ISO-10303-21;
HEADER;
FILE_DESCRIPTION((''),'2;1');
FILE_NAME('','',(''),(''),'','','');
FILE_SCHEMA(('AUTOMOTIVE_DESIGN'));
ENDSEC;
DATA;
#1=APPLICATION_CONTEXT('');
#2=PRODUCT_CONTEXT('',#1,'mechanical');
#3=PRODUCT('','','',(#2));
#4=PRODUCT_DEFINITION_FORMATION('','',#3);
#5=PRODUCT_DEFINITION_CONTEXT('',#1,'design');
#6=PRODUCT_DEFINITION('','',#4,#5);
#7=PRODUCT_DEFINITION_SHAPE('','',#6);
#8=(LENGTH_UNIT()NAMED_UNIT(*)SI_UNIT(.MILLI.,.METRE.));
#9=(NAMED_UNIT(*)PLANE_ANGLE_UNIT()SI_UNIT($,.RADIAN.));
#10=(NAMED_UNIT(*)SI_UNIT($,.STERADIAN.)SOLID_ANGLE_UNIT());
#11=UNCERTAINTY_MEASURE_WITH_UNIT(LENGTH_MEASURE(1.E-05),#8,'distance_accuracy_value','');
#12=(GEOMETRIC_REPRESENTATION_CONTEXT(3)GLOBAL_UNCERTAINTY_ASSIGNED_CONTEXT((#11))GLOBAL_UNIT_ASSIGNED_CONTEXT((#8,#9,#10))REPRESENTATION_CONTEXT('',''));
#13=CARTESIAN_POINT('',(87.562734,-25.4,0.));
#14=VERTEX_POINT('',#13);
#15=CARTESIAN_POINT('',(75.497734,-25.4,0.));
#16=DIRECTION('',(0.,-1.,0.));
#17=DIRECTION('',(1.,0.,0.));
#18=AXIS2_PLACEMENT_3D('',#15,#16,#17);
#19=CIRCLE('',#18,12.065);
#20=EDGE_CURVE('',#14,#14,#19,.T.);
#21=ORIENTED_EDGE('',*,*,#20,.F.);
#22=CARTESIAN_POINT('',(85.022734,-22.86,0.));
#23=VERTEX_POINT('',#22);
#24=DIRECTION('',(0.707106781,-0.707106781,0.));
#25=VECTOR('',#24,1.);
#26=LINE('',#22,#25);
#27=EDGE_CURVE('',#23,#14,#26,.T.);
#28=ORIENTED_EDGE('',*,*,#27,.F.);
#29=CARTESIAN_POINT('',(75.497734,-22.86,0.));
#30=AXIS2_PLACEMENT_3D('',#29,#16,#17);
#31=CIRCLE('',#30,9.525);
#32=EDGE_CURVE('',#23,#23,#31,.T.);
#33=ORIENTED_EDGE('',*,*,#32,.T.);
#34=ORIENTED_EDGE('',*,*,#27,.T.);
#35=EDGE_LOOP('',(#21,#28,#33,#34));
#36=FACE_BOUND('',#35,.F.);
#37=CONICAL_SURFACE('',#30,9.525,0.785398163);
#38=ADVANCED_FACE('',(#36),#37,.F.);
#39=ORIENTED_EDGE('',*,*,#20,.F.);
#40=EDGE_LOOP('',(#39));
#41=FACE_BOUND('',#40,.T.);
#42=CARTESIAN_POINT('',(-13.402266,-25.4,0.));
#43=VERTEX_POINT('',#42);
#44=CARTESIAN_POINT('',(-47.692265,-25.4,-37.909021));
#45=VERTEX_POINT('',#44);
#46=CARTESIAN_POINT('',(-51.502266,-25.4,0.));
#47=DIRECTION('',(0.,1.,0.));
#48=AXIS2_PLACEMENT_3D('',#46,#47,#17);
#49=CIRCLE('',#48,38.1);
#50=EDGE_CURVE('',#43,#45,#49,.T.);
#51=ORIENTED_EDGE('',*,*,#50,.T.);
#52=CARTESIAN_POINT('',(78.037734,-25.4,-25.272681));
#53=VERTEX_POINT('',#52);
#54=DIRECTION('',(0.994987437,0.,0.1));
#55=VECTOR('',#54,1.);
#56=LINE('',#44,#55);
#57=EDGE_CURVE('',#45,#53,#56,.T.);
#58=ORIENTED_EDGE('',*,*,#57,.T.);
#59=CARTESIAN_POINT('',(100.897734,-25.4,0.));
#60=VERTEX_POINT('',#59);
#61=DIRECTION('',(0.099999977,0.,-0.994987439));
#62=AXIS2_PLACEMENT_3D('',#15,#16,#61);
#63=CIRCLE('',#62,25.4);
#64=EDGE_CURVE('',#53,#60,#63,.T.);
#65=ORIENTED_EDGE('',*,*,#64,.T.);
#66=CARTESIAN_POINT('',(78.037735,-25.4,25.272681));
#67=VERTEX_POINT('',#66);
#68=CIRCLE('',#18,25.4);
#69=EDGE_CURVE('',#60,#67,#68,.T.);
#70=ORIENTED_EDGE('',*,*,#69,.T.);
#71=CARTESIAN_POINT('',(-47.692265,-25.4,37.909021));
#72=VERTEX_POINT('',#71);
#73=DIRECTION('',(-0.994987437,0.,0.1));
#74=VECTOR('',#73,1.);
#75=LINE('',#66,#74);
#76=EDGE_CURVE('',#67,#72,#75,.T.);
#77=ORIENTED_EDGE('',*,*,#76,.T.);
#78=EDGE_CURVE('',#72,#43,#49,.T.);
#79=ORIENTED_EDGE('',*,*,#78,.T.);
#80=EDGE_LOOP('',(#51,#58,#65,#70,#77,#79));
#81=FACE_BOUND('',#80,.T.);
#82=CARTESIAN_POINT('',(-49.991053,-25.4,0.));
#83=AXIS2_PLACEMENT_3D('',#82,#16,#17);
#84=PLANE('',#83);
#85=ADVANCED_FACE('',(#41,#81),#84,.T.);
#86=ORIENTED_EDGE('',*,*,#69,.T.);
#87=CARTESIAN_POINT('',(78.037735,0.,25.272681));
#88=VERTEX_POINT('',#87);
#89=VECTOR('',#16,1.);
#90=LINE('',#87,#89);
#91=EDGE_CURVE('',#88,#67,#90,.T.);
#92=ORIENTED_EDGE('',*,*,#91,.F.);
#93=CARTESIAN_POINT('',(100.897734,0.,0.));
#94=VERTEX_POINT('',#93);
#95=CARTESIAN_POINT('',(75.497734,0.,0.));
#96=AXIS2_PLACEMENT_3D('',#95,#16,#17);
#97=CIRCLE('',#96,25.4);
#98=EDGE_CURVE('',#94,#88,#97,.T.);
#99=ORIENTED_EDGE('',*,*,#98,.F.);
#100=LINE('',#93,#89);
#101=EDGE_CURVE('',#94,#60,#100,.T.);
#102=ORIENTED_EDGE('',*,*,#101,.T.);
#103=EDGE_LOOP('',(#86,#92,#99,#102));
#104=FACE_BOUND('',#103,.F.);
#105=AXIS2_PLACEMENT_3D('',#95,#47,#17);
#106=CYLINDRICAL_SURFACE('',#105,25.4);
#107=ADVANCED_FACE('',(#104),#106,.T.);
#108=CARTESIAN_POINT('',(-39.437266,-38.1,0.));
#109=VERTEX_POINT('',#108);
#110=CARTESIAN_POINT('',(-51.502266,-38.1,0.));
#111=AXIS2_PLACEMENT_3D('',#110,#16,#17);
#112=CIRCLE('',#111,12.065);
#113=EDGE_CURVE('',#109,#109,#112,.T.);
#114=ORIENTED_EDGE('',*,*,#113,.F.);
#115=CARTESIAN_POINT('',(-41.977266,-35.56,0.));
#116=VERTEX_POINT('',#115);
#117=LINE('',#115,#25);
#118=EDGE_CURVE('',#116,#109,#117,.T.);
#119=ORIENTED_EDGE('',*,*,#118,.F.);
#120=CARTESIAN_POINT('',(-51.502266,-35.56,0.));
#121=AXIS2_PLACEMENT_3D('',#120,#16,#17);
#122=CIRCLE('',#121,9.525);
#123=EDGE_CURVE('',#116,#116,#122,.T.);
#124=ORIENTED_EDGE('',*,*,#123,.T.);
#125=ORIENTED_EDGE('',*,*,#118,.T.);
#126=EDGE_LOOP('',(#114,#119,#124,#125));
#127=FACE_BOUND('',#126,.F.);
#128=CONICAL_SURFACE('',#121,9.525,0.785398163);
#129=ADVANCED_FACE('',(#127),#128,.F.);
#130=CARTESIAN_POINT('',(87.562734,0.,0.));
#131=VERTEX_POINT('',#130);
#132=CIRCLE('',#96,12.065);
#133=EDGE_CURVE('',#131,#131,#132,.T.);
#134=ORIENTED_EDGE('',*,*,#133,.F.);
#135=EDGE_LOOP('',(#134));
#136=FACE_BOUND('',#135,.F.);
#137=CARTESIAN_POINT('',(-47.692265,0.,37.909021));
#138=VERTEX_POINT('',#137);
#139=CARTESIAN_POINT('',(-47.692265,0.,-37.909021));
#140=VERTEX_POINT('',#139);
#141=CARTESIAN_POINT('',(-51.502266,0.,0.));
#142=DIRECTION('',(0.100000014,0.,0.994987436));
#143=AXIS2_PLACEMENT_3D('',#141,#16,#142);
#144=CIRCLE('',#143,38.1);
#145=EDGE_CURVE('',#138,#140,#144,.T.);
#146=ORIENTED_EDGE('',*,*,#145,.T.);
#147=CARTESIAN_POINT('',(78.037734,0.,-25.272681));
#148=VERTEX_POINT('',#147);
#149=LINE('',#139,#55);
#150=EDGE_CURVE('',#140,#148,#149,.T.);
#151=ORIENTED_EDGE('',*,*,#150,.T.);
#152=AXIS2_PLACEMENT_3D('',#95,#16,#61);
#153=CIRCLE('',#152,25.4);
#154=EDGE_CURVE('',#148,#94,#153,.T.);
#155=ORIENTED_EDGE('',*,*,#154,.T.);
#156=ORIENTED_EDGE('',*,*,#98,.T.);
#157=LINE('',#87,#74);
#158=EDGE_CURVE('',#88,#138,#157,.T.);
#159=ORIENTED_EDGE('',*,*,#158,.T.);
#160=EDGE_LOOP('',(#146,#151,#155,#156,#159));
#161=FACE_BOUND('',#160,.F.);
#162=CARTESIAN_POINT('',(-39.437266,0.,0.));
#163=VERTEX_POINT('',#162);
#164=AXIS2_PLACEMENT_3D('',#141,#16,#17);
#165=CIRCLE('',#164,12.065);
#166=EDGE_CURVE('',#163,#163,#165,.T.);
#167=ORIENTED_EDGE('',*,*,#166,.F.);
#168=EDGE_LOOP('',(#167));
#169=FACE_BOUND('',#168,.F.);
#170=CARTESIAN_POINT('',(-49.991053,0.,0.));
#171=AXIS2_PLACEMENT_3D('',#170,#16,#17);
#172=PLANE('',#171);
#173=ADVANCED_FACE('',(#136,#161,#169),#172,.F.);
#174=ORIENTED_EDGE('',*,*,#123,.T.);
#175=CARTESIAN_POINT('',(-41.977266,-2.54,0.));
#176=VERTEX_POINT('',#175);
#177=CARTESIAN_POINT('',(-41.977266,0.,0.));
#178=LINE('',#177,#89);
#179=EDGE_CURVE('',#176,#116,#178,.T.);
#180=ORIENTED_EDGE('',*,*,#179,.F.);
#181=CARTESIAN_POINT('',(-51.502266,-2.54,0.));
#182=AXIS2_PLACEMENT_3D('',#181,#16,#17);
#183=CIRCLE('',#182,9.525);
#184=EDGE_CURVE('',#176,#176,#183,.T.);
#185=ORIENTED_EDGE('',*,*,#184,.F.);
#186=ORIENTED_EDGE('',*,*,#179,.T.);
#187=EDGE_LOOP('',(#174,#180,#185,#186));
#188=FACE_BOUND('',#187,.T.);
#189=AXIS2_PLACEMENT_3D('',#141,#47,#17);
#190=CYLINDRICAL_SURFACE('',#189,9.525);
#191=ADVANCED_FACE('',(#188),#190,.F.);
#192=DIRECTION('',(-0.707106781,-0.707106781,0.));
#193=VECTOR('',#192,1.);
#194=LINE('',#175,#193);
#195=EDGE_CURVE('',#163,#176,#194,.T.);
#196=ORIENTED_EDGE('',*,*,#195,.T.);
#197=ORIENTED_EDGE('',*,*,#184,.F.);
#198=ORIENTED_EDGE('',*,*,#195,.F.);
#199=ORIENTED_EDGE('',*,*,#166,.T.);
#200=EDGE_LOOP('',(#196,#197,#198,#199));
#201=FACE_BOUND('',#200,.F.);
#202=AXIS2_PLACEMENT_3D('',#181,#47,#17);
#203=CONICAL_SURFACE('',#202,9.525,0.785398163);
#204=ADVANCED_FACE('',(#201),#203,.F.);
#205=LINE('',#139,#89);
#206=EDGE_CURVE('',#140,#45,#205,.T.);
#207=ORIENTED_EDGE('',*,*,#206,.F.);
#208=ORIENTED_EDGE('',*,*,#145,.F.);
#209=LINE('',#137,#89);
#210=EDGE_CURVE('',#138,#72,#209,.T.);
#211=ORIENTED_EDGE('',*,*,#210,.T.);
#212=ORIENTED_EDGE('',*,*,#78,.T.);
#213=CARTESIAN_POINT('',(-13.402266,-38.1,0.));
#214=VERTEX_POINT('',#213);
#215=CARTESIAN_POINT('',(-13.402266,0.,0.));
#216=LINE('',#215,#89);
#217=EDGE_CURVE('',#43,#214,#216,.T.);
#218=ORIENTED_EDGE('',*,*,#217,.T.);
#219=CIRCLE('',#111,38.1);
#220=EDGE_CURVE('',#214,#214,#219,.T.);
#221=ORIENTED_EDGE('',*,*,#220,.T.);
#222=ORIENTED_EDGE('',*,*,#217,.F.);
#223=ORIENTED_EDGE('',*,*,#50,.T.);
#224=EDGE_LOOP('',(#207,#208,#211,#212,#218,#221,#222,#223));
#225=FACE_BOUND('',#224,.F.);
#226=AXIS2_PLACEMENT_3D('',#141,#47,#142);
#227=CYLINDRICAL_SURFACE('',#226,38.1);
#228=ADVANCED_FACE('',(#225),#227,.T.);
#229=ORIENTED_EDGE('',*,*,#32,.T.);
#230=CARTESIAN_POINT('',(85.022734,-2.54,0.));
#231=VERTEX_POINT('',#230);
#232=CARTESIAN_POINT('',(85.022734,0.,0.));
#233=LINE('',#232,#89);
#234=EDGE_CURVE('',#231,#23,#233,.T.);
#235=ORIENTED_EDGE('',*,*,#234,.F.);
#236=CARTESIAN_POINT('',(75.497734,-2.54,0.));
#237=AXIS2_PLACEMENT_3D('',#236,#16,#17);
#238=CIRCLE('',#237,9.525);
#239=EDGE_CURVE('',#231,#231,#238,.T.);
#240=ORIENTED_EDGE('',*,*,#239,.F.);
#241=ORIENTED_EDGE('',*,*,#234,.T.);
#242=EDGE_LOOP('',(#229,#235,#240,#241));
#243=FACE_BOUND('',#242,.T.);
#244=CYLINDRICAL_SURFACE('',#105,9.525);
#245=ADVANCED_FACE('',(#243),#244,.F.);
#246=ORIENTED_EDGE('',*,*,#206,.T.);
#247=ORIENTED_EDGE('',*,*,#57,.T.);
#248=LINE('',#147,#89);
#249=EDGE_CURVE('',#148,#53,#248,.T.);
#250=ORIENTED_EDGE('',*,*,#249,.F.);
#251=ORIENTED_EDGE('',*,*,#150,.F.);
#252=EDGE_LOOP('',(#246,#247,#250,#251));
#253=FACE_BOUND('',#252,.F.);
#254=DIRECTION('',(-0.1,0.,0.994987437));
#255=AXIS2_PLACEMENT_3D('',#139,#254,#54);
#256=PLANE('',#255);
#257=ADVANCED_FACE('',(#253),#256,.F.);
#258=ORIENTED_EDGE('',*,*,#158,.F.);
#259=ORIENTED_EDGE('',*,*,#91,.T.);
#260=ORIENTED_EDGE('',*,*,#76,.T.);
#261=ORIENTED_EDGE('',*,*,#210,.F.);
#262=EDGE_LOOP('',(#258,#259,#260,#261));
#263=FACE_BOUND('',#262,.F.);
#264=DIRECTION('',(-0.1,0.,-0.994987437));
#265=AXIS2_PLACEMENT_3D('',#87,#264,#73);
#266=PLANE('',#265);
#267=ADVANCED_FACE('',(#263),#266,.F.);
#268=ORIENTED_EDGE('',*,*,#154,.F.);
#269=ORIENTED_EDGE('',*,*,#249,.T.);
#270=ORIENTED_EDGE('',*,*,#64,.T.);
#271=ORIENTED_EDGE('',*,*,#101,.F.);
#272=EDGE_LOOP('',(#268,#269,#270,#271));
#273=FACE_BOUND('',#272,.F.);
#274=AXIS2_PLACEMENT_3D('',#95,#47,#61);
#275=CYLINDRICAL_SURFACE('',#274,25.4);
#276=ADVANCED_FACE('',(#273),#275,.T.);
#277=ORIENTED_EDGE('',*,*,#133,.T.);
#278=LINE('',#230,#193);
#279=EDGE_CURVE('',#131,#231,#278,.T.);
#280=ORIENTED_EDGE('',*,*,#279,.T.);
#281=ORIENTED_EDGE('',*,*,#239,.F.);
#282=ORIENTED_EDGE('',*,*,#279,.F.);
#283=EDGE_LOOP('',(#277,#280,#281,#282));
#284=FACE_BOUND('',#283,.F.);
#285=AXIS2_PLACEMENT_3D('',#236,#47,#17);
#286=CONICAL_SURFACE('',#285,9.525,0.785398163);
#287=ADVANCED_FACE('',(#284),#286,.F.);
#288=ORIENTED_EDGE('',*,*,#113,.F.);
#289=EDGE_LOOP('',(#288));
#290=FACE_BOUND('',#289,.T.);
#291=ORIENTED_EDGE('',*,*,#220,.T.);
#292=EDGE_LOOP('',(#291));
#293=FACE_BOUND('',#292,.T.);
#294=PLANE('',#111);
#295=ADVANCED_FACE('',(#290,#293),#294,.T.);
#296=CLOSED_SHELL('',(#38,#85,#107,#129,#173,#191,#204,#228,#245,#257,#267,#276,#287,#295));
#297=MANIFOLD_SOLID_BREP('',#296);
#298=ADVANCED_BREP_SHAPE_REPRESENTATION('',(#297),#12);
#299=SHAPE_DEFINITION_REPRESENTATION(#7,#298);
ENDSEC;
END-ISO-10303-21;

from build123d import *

# Parameters (mm, degrees)
F1_R     = 9.525
F2_DEPTH = 25.4
F0_R     = 38.1
F0_R_2   = 9.525
F3_DEPTH = 38.1
F4_SIZE  = 2.54


with BuildPart() as f2:
    # F1 (on face) → F2 (new body)
    with BuildSketch(Plane.XZ):
        with BuildLine():
            ThreePointArc((-13.4022655529, 0), (-23.2465491404, 25.5582567875), (-47.6922650288, 37.9090213011))
            ThreePointArc((-47.6922650288, 37.9090213011), (-89.6022655529, 2.206e-07), (-47.6922654678, -37.9090213452))
            ThreePointArc((-47.6922654678, -37.9090213452), (-23.2465492884, -25.5582569511), (-13.4022655529, 0))
        make_face()
        with Locations((-51.5022655529, 0)):
            Circle(F1_R, mode=Mode.SUBTRACT)
        with BuildLine():
            Line((78.0377345258, 25.2726808946), (-47.6922650288, 37.9090213011))
            ThreePointArc((-47.6922650288, 37.9090213011), (-23.2465491404, 25.5582567875), (-13.4022655529, 0))
            ThreePointArc((-13.4022655529, 0), (-23.2465492884, -25.5582569511), (-47.6922654678, -37.9090213452))
            Line((-47.6922654678, -37.9090213452), (78.0377338702, -25.2726809605))
            ThreePointArc((78.0377338702, -25.2726809605), (50.0977344471, 3.295e-07), (78.0377345258, 25.2726808946))
        make_face()
        with BuildLine():
            ThreePointArc((100.8977344471, 0), (94.3348786309, 17.0388379592), (78.0377345258, 25.2726808946))
            ThreePointArc((78.0377345258, 25.2726808946), (50.0977344471, 3.295e-07), (78.0377338702, -25.2726809605))
            ThreePointArc((78.0377338702, -25.2726809605), (94.3348784099, -17.0388382036), (100.8977344471, 0))
        make_face()
        with Locations((75.4977344471, 0)):
            Circle(F1_R, mode=Mode.SUBTRACT)
    extrude(amount=F2_DEPTH)

    # F0 (on Front) → F3 (join)
    with BuildSketch(Plane.XZ):
        with Locations((-51.5022655529, 0)):
            Circle(F0_R)
        with Locations((-51.5022655529, 0)):
            Circle(F0_R_2, mode=Mode.SUBTRACT)
    extrude(amount=F3_DEPTH)

    # F4
    f4_edges = [f2.edges().sort_by_distance(p)[0] for p in [
        (85.022734, -12.7, 0),
        (65.972734, 0, 0),
        (65.972734, -25.4, 0),
        (-61.027266, 0, 0),
        (-41.977266, -19.05, 0),
        (-61.027266, -38.1, 0),
    ]]
    chamfer(f4_edges, length=F4_SIZE)


solid = f2.part
